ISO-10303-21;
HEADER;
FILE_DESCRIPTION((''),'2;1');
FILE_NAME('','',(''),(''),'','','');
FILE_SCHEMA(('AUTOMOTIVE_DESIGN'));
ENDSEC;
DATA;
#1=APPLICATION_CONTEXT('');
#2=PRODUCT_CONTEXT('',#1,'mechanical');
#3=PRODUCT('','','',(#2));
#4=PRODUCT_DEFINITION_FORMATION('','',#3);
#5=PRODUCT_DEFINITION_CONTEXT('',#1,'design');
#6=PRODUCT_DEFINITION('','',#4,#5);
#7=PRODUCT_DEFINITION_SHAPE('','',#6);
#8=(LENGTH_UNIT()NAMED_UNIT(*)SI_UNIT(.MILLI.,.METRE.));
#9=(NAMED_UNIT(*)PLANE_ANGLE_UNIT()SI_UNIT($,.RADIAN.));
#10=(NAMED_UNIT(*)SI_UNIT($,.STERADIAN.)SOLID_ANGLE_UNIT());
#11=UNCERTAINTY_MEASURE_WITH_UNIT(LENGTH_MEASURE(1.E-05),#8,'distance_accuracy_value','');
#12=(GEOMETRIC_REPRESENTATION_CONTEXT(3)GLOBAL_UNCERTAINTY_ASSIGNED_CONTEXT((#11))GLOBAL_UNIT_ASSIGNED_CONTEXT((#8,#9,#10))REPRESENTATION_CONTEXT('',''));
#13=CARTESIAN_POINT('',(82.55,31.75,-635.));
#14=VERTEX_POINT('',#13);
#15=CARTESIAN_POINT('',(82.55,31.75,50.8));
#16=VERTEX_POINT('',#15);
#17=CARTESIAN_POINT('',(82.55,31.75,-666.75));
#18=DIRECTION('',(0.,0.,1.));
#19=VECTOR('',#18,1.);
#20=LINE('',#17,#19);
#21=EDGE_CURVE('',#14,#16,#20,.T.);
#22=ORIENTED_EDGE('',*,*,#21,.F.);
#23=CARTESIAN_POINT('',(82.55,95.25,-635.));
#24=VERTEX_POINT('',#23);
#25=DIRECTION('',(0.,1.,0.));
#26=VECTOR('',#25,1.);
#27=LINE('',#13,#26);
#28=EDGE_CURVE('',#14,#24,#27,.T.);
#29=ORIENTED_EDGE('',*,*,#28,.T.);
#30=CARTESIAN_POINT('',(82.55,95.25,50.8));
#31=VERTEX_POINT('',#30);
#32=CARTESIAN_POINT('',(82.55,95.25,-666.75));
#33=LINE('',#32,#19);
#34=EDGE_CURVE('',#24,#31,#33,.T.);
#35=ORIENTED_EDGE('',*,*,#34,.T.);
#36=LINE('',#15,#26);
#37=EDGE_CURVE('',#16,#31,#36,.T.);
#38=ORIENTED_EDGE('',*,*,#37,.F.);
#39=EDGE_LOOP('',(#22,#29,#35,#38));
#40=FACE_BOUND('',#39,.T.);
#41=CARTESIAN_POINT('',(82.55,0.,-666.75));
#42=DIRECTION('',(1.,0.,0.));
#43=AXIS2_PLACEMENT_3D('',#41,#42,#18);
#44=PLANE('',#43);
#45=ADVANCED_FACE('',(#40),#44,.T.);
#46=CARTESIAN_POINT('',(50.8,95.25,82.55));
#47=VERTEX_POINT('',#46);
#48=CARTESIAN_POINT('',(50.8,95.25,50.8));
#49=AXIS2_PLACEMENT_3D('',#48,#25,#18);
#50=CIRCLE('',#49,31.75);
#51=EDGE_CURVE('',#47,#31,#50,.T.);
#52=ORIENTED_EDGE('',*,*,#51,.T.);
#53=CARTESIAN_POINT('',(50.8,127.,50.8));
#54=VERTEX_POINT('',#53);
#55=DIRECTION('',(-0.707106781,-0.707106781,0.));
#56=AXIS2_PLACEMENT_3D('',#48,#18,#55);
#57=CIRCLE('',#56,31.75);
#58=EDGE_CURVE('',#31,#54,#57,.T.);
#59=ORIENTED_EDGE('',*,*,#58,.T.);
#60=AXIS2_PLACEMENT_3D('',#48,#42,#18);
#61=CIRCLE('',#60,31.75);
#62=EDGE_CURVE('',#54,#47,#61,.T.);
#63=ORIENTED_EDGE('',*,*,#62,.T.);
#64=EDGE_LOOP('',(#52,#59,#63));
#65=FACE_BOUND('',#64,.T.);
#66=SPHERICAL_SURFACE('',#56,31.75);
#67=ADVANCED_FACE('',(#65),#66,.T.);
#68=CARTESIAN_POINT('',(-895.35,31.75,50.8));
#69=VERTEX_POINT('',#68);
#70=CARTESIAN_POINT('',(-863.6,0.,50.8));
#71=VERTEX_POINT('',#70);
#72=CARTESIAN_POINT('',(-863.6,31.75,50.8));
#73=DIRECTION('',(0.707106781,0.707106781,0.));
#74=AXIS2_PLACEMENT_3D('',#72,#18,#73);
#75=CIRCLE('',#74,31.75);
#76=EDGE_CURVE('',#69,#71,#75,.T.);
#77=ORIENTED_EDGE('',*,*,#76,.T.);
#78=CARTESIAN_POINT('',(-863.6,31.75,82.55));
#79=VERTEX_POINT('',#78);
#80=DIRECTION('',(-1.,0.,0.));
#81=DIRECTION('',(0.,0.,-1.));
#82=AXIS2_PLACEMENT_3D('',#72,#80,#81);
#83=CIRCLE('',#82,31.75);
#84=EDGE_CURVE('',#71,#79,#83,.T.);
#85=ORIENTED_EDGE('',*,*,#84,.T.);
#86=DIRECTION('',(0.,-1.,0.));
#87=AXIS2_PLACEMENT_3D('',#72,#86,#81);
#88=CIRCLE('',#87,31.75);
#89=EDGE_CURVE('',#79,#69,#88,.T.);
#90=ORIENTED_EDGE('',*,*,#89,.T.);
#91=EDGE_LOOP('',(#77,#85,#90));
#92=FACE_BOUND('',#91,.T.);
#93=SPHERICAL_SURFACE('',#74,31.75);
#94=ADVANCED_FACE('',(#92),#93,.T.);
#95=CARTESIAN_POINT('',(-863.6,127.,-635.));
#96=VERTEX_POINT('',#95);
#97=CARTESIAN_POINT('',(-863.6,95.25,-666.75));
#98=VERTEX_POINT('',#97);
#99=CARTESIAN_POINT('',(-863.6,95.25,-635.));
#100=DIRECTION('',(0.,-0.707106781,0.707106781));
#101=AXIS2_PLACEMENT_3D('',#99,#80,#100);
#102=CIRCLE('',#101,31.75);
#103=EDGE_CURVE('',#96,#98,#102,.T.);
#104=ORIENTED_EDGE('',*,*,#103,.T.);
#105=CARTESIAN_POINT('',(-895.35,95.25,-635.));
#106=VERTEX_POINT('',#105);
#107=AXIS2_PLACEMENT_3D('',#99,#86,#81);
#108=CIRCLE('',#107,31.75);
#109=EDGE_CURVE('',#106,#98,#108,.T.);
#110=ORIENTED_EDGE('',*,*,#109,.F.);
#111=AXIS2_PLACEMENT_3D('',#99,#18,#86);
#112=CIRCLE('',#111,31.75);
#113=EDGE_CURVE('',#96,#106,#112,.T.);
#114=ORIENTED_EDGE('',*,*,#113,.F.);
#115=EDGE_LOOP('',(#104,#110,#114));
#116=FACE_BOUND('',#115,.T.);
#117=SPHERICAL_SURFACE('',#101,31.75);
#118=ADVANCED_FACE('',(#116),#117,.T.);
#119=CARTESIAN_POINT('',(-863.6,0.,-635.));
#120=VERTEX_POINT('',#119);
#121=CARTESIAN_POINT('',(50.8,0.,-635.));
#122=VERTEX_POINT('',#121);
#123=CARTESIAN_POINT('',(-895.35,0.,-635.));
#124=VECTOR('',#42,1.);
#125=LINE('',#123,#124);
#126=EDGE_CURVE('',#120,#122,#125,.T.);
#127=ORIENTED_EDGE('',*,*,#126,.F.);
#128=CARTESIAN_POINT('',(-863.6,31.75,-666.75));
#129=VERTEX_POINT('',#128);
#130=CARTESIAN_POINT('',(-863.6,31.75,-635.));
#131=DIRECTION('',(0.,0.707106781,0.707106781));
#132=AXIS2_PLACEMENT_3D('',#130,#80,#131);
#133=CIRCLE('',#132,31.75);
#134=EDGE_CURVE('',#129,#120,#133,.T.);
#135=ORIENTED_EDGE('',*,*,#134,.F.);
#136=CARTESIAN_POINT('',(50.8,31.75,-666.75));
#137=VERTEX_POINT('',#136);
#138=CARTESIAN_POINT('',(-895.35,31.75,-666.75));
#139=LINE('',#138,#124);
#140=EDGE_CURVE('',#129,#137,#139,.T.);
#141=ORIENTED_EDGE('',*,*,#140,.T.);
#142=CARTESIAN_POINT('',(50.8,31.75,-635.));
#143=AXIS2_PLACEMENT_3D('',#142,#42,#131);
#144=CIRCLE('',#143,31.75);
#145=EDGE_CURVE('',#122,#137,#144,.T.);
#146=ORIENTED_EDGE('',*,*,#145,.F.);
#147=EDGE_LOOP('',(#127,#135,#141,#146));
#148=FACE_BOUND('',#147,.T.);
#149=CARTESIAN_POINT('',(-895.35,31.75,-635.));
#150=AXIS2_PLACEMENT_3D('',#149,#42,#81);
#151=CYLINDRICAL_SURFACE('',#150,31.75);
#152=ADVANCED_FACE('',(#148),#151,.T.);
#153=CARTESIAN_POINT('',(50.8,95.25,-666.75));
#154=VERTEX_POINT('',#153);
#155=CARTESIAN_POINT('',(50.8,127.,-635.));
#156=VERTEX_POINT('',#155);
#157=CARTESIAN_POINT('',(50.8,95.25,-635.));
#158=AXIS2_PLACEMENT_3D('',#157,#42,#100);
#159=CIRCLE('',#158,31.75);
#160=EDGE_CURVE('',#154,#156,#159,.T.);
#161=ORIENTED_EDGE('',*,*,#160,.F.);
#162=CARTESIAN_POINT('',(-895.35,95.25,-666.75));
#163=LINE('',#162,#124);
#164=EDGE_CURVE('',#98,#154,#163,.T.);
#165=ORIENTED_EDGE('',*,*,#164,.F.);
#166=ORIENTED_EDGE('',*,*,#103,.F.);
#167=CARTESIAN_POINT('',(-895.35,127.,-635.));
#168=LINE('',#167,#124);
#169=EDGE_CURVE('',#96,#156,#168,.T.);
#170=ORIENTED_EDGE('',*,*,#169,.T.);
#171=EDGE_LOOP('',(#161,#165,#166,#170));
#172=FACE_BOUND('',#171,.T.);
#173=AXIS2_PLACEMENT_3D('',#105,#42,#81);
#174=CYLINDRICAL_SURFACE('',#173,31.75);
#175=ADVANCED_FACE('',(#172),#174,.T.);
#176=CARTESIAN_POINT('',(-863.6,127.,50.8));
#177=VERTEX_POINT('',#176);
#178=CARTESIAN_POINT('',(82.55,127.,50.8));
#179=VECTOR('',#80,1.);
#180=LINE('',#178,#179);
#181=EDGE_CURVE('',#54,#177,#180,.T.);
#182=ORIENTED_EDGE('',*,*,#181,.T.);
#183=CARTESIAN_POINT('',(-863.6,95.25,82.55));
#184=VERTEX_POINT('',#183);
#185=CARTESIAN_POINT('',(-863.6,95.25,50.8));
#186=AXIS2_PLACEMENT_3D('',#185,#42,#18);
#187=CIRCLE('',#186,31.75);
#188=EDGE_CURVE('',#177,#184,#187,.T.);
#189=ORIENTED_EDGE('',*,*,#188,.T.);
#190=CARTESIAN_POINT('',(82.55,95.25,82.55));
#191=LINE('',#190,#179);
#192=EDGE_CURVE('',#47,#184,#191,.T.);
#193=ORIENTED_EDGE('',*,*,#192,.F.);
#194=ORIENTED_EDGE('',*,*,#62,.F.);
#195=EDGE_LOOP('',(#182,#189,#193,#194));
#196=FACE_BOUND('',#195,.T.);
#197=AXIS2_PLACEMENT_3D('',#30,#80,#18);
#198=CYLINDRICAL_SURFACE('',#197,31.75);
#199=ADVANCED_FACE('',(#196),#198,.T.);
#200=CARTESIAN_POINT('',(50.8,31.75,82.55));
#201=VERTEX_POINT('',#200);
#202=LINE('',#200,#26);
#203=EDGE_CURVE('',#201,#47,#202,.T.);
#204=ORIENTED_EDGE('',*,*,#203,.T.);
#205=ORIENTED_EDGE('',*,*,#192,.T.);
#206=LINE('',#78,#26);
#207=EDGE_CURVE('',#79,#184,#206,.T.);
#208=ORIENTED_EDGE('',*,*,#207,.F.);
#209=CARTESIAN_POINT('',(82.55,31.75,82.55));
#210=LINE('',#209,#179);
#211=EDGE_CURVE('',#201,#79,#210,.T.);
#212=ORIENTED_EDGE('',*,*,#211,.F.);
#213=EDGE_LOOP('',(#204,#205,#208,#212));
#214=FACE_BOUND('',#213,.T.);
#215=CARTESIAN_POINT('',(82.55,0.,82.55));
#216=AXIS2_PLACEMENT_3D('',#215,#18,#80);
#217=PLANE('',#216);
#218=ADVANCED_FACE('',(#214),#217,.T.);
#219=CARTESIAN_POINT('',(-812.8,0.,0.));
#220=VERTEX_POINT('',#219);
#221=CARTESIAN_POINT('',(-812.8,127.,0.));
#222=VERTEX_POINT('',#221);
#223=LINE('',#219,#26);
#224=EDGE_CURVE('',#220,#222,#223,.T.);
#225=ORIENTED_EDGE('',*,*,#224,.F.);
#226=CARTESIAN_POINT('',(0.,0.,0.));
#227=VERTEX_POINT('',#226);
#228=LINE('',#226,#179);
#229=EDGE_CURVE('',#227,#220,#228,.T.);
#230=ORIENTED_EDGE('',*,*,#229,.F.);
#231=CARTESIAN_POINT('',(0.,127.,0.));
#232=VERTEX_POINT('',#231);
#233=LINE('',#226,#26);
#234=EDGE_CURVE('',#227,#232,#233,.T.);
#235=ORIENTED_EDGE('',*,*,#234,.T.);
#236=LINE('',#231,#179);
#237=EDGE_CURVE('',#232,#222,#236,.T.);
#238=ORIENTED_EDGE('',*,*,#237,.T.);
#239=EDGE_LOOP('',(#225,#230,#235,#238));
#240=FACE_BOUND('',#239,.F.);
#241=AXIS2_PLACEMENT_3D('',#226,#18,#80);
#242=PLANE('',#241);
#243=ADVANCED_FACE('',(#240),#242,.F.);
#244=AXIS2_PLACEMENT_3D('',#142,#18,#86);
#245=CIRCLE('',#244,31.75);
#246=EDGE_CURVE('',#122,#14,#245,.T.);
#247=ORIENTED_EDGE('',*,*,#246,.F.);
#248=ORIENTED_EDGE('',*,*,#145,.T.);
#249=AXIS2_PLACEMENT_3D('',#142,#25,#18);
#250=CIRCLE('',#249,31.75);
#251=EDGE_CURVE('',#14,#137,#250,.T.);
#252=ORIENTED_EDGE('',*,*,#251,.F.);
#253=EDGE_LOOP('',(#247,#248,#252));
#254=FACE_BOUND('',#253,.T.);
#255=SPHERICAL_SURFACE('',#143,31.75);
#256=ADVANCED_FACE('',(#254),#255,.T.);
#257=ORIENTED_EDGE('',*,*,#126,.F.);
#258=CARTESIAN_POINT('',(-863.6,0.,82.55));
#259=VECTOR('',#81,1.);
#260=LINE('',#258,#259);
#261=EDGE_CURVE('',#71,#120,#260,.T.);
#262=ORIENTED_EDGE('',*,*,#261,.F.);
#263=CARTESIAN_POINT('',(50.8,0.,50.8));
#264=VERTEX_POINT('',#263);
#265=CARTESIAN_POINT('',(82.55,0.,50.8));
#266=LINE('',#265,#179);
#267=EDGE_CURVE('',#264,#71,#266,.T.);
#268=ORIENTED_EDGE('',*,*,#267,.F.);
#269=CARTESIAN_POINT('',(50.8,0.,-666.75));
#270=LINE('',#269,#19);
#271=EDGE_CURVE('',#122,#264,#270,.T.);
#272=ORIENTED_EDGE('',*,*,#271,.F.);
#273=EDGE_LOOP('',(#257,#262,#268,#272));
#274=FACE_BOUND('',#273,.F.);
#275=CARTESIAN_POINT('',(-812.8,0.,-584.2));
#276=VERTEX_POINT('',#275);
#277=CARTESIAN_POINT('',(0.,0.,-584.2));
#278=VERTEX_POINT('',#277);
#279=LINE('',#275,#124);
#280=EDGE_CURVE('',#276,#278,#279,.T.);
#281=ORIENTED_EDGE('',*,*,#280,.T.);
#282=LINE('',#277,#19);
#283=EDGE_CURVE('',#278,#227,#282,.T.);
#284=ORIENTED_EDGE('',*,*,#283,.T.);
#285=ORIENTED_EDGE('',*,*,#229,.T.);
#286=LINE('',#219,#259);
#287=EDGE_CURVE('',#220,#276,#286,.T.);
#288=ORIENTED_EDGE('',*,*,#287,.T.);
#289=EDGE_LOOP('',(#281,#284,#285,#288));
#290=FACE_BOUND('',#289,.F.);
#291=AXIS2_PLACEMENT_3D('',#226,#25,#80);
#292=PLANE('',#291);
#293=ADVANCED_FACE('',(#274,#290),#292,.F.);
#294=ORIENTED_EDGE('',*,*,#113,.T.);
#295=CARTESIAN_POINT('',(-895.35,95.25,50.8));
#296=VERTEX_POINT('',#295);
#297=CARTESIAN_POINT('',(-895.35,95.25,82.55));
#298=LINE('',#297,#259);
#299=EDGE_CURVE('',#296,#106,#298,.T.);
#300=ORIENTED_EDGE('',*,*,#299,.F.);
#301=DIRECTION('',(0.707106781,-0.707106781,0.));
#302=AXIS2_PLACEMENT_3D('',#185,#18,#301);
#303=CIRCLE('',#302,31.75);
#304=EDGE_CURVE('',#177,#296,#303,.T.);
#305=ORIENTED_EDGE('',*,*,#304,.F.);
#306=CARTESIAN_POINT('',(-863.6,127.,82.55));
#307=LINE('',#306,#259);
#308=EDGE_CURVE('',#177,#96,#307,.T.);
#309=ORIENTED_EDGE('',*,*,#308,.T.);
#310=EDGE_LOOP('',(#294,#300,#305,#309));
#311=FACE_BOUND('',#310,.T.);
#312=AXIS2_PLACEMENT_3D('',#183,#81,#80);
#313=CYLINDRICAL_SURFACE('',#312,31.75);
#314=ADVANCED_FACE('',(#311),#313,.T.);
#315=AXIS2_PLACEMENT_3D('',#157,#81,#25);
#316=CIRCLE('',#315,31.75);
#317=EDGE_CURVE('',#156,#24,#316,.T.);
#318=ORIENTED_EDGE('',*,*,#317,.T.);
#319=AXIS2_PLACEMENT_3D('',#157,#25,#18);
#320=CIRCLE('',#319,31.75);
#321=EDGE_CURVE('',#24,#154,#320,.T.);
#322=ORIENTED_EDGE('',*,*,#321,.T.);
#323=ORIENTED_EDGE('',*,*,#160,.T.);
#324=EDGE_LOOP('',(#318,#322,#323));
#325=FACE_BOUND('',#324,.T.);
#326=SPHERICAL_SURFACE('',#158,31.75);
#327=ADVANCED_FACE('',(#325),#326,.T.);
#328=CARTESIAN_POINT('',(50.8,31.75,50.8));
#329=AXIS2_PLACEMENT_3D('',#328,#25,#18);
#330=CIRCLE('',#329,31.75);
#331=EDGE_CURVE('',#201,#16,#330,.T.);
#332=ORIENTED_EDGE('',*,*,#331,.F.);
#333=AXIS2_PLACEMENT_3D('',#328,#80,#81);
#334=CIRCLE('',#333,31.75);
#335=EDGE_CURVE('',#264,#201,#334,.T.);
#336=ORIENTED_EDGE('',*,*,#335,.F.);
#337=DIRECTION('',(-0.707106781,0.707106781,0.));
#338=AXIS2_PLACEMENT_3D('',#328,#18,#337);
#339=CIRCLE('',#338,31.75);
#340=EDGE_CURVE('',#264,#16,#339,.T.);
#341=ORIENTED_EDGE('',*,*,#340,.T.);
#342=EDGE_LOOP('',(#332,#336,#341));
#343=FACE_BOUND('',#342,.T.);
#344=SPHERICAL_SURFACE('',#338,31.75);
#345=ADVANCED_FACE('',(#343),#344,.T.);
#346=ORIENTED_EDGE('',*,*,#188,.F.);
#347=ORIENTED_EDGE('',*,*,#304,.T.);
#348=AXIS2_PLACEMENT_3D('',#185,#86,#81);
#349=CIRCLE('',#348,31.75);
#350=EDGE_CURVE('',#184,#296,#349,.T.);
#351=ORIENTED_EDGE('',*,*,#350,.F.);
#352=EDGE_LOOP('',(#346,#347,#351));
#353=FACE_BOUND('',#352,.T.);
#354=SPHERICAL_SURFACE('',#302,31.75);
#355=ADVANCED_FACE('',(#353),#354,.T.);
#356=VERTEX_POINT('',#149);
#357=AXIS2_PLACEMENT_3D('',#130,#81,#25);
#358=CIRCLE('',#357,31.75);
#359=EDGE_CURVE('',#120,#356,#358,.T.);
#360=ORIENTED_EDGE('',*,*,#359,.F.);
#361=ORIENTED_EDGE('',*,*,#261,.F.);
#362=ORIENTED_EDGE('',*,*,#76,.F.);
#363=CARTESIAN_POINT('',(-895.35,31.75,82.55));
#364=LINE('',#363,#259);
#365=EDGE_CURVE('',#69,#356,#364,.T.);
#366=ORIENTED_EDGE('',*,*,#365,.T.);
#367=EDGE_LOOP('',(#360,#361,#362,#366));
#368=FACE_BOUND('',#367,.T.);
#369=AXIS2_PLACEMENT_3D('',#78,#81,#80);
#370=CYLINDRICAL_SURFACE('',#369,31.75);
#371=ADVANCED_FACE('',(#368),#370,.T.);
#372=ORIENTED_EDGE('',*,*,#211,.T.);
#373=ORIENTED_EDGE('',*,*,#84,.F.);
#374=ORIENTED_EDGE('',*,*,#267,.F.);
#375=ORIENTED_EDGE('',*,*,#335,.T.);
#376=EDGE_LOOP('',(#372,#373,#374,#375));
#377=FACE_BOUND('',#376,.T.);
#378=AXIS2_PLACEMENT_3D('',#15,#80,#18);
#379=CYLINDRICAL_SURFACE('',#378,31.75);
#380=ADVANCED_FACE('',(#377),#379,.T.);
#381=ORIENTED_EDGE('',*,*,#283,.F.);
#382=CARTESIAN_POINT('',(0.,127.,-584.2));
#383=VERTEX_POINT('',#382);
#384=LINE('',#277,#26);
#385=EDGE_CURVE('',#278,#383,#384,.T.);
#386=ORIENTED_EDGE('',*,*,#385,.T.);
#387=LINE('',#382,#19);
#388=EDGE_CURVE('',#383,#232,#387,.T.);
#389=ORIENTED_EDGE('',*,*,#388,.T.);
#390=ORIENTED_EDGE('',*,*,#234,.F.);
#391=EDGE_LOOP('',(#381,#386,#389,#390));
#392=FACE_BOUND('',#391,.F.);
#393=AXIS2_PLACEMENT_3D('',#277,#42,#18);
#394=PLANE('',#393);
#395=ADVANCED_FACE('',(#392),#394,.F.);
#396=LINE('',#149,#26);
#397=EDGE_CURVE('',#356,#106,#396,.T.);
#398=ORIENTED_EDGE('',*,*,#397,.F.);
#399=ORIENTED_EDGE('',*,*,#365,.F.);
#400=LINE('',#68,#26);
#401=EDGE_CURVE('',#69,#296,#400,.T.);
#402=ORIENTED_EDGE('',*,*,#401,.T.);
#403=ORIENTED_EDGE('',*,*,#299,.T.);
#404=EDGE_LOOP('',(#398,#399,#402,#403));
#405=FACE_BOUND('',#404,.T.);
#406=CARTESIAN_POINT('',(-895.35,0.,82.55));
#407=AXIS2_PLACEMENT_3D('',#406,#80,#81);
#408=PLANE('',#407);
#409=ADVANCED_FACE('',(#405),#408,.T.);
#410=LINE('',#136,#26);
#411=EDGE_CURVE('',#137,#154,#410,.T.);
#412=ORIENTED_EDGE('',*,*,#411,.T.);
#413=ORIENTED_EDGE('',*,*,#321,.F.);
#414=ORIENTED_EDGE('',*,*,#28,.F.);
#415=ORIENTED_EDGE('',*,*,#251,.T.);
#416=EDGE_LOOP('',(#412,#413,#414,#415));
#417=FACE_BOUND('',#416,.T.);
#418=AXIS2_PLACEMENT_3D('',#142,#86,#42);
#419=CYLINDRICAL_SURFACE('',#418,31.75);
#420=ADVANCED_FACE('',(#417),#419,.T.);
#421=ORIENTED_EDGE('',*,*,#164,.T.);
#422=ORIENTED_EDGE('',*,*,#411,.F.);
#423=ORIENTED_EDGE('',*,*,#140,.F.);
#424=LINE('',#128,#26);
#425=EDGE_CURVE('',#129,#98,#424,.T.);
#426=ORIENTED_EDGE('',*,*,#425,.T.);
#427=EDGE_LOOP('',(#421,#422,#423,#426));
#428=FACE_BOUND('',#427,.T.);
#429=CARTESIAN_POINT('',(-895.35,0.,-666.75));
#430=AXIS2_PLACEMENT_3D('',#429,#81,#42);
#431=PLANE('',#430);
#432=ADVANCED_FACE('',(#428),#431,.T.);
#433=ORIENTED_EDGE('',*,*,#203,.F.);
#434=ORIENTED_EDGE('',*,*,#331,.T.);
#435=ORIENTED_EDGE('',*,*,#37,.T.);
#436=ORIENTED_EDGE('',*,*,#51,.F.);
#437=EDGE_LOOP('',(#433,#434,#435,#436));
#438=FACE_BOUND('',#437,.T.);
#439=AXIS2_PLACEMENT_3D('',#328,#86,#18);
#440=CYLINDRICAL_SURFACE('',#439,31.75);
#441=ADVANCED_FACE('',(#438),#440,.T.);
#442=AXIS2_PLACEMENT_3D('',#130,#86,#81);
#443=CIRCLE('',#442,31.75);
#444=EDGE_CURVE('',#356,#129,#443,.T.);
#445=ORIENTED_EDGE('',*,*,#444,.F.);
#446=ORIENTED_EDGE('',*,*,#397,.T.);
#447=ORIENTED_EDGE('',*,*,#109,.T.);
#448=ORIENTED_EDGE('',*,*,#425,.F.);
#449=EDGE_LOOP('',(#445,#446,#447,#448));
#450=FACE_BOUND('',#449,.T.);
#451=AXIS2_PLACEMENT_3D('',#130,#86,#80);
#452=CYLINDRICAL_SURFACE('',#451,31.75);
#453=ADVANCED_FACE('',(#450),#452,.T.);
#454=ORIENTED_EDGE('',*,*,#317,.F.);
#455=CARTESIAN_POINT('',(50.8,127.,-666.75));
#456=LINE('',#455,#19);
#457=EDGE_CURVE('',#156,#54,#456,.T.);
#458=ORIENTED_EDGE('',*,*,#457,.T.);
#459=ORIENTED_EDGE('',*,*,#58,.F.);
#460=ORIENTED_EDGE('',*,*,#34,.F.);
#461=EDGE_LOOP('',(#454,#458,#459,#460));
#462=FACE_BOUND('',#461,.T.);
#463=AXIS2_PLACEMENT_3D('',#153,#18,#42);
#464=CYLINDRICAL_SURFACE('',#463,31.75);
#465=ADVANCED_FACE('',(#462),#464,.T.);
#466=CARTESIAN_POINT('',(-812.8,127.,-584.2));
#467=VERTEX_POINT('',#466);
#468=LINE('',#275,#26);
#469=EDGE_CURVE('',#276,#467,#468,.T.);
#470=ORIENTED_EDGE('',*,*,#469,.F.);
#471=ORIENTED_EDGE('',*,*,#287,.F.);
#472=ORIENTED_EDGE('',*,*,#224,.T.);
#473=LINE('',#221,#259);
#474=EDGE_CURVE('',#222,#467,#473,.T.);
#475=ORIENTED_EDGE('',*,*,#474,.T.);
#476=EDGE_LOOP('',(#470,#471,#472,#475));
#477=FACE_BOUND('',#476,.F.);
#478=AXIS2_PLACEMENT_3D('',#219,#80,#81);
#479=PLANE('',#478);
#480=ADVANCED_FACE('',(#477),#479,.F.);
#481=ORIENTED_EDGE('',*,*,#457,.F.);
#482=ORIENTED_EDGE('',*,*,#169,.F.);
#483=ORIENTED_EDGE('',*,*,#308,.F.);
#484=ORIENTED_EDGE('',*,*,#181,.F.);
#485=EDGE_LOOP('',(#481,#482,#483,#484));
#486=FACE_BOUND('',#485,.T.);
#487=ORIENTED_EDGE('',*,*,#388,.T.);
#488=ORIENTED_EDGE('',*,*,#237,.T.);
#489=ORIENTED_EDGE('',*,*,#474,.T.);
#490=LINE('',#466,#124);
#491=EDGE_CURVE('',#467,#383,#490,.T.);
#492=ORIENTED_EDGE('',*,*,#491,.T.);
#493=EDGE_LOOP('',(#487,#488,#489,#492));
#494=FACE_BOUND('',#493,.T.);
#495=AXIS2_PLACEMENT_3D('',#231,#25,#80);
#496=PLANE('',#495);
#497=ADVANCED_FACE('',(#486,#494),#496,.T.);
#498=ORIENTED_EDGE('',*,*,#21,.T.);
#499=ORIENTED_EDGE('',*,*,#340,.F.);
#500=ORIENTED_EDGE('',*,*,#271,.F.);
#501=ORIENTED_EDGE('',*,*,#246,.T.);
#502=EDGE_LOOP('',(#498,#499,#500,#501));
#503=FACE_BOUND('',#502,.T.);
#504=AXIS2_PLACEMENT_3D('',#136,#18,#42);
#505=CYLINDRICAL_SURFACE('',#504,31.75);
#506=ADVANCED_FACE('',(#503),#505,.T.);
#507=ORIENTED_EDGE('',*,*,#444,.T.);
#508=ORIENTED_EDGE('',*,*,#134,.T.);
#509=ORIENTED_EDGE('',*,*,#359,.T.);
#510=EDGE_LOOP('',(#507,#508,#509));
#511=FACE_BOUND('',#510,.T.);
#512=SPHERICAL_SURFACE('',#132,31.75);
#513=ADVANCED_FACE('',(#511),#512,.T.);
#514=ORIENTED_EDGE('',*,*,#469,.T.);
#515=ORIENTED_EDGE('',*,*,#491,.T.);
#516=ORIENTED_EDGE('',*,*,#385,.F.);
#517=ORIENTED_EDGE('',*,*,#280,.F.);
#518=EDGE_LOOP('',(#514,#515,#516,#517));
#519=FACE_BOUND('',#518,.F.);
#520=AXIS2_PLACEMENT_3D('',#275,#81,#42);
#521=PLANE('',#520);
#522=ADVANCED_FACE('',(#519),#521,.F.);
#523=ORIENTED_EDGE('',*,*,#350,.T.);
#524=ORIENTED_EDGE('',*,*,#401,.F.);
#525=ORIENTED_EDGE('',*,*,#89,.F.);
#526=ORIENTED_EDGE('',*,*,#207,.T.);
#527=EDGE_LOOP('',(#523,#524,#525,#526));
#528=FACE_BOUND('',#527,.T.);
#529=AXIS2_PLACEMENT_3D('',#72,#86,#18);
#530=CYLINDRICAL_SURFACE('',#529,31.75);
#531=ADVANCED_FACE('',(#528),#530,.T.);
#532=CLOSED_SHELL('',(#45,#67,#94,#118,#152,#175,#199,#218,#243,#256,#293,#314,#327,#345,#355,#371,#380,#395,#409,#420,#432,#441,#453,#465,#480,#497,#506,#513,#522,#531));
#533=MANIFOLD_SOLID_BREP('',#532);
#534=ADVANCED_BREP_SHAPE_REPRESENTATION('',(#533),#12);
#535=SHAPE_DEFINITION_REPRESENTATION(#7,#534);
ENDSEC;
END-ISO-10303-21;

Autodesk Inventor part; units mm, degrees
ref_plane "YZ Plane" through (0, 0, 0) normal (1, 0, 0) x (0, 1, 0)
ref_plane "XZ Plane" through (0, 0, 0) normal (0, 1, 0) x (-1, 0, 0)
ref_plane "XY Plane" through (0, 0, 0) normal (0, 0, 1) x (1, 0, 0)
sketch "Sketch1" plane through (0, 0, 0) normal (0, 1, 0) x (-1, 0, 0)
  line L0 (0, 0) -> (812.8, 0)
  line L1 (812.8, 0) -> (812.8, -584.2)
  line L2 (812.8, -584.2) -> (0, -584.2)
  line L3 (0, -584.2) -> (0, 0)
  line L4 (-82.55, 82.55) -> (895.35, 82.55)
  line L5 (895.35, 82.55) -> (895.35, -666.75)
  line L6 (895.35, -666.75) -> (-82.55, -666.75)
  line L7 (-82.55, -666.75) -> (-82.55, 82.55)
  dimension "d0" = 812.8
  dimension "d1" = 584.2
  dimension "d2" = 82.55
  dimension "d3" = 82.55
  dimension "d4" = 82.55
  dimension "d5" = 82.55
extrude "Extrusion1" add sketch "Sketch1" along normal blind 127
fillet "Fillet1" radius 31.75 8 edges at (-406.4, 127, 82.55) (82.55, 127, -292.1) (-406.4, 0, 82.55) (82.55, 0, -292.1) (-895.35, 127, -292.1) (-406.4, 127, -666.75) (-406.4, 0, -666.75) (-895.35, 0, -292.1)
fillet "Fillet2" radius 31.75 12 edges at (-886.0506, 117.7006, 73.2506) (-886.0506, 9.2994, 73.2506) (-895.35, 63.5, 82.55) (-886.0506, 117.7006, -657.4506) (-886.0506, 9.2994, -657.4506) (-895.35, 63.5, -666.75) (73.2506, 117.7006, 73.2506) (73.2506, 9.2994, 73.2506) (82.55, 63.5, 82.55) (73.2506, 117.7006, -657.4506) (73.2506, 9.2994, -657.4506) (82.55, 63.5, -666.75)
properties part number "bumpers"
